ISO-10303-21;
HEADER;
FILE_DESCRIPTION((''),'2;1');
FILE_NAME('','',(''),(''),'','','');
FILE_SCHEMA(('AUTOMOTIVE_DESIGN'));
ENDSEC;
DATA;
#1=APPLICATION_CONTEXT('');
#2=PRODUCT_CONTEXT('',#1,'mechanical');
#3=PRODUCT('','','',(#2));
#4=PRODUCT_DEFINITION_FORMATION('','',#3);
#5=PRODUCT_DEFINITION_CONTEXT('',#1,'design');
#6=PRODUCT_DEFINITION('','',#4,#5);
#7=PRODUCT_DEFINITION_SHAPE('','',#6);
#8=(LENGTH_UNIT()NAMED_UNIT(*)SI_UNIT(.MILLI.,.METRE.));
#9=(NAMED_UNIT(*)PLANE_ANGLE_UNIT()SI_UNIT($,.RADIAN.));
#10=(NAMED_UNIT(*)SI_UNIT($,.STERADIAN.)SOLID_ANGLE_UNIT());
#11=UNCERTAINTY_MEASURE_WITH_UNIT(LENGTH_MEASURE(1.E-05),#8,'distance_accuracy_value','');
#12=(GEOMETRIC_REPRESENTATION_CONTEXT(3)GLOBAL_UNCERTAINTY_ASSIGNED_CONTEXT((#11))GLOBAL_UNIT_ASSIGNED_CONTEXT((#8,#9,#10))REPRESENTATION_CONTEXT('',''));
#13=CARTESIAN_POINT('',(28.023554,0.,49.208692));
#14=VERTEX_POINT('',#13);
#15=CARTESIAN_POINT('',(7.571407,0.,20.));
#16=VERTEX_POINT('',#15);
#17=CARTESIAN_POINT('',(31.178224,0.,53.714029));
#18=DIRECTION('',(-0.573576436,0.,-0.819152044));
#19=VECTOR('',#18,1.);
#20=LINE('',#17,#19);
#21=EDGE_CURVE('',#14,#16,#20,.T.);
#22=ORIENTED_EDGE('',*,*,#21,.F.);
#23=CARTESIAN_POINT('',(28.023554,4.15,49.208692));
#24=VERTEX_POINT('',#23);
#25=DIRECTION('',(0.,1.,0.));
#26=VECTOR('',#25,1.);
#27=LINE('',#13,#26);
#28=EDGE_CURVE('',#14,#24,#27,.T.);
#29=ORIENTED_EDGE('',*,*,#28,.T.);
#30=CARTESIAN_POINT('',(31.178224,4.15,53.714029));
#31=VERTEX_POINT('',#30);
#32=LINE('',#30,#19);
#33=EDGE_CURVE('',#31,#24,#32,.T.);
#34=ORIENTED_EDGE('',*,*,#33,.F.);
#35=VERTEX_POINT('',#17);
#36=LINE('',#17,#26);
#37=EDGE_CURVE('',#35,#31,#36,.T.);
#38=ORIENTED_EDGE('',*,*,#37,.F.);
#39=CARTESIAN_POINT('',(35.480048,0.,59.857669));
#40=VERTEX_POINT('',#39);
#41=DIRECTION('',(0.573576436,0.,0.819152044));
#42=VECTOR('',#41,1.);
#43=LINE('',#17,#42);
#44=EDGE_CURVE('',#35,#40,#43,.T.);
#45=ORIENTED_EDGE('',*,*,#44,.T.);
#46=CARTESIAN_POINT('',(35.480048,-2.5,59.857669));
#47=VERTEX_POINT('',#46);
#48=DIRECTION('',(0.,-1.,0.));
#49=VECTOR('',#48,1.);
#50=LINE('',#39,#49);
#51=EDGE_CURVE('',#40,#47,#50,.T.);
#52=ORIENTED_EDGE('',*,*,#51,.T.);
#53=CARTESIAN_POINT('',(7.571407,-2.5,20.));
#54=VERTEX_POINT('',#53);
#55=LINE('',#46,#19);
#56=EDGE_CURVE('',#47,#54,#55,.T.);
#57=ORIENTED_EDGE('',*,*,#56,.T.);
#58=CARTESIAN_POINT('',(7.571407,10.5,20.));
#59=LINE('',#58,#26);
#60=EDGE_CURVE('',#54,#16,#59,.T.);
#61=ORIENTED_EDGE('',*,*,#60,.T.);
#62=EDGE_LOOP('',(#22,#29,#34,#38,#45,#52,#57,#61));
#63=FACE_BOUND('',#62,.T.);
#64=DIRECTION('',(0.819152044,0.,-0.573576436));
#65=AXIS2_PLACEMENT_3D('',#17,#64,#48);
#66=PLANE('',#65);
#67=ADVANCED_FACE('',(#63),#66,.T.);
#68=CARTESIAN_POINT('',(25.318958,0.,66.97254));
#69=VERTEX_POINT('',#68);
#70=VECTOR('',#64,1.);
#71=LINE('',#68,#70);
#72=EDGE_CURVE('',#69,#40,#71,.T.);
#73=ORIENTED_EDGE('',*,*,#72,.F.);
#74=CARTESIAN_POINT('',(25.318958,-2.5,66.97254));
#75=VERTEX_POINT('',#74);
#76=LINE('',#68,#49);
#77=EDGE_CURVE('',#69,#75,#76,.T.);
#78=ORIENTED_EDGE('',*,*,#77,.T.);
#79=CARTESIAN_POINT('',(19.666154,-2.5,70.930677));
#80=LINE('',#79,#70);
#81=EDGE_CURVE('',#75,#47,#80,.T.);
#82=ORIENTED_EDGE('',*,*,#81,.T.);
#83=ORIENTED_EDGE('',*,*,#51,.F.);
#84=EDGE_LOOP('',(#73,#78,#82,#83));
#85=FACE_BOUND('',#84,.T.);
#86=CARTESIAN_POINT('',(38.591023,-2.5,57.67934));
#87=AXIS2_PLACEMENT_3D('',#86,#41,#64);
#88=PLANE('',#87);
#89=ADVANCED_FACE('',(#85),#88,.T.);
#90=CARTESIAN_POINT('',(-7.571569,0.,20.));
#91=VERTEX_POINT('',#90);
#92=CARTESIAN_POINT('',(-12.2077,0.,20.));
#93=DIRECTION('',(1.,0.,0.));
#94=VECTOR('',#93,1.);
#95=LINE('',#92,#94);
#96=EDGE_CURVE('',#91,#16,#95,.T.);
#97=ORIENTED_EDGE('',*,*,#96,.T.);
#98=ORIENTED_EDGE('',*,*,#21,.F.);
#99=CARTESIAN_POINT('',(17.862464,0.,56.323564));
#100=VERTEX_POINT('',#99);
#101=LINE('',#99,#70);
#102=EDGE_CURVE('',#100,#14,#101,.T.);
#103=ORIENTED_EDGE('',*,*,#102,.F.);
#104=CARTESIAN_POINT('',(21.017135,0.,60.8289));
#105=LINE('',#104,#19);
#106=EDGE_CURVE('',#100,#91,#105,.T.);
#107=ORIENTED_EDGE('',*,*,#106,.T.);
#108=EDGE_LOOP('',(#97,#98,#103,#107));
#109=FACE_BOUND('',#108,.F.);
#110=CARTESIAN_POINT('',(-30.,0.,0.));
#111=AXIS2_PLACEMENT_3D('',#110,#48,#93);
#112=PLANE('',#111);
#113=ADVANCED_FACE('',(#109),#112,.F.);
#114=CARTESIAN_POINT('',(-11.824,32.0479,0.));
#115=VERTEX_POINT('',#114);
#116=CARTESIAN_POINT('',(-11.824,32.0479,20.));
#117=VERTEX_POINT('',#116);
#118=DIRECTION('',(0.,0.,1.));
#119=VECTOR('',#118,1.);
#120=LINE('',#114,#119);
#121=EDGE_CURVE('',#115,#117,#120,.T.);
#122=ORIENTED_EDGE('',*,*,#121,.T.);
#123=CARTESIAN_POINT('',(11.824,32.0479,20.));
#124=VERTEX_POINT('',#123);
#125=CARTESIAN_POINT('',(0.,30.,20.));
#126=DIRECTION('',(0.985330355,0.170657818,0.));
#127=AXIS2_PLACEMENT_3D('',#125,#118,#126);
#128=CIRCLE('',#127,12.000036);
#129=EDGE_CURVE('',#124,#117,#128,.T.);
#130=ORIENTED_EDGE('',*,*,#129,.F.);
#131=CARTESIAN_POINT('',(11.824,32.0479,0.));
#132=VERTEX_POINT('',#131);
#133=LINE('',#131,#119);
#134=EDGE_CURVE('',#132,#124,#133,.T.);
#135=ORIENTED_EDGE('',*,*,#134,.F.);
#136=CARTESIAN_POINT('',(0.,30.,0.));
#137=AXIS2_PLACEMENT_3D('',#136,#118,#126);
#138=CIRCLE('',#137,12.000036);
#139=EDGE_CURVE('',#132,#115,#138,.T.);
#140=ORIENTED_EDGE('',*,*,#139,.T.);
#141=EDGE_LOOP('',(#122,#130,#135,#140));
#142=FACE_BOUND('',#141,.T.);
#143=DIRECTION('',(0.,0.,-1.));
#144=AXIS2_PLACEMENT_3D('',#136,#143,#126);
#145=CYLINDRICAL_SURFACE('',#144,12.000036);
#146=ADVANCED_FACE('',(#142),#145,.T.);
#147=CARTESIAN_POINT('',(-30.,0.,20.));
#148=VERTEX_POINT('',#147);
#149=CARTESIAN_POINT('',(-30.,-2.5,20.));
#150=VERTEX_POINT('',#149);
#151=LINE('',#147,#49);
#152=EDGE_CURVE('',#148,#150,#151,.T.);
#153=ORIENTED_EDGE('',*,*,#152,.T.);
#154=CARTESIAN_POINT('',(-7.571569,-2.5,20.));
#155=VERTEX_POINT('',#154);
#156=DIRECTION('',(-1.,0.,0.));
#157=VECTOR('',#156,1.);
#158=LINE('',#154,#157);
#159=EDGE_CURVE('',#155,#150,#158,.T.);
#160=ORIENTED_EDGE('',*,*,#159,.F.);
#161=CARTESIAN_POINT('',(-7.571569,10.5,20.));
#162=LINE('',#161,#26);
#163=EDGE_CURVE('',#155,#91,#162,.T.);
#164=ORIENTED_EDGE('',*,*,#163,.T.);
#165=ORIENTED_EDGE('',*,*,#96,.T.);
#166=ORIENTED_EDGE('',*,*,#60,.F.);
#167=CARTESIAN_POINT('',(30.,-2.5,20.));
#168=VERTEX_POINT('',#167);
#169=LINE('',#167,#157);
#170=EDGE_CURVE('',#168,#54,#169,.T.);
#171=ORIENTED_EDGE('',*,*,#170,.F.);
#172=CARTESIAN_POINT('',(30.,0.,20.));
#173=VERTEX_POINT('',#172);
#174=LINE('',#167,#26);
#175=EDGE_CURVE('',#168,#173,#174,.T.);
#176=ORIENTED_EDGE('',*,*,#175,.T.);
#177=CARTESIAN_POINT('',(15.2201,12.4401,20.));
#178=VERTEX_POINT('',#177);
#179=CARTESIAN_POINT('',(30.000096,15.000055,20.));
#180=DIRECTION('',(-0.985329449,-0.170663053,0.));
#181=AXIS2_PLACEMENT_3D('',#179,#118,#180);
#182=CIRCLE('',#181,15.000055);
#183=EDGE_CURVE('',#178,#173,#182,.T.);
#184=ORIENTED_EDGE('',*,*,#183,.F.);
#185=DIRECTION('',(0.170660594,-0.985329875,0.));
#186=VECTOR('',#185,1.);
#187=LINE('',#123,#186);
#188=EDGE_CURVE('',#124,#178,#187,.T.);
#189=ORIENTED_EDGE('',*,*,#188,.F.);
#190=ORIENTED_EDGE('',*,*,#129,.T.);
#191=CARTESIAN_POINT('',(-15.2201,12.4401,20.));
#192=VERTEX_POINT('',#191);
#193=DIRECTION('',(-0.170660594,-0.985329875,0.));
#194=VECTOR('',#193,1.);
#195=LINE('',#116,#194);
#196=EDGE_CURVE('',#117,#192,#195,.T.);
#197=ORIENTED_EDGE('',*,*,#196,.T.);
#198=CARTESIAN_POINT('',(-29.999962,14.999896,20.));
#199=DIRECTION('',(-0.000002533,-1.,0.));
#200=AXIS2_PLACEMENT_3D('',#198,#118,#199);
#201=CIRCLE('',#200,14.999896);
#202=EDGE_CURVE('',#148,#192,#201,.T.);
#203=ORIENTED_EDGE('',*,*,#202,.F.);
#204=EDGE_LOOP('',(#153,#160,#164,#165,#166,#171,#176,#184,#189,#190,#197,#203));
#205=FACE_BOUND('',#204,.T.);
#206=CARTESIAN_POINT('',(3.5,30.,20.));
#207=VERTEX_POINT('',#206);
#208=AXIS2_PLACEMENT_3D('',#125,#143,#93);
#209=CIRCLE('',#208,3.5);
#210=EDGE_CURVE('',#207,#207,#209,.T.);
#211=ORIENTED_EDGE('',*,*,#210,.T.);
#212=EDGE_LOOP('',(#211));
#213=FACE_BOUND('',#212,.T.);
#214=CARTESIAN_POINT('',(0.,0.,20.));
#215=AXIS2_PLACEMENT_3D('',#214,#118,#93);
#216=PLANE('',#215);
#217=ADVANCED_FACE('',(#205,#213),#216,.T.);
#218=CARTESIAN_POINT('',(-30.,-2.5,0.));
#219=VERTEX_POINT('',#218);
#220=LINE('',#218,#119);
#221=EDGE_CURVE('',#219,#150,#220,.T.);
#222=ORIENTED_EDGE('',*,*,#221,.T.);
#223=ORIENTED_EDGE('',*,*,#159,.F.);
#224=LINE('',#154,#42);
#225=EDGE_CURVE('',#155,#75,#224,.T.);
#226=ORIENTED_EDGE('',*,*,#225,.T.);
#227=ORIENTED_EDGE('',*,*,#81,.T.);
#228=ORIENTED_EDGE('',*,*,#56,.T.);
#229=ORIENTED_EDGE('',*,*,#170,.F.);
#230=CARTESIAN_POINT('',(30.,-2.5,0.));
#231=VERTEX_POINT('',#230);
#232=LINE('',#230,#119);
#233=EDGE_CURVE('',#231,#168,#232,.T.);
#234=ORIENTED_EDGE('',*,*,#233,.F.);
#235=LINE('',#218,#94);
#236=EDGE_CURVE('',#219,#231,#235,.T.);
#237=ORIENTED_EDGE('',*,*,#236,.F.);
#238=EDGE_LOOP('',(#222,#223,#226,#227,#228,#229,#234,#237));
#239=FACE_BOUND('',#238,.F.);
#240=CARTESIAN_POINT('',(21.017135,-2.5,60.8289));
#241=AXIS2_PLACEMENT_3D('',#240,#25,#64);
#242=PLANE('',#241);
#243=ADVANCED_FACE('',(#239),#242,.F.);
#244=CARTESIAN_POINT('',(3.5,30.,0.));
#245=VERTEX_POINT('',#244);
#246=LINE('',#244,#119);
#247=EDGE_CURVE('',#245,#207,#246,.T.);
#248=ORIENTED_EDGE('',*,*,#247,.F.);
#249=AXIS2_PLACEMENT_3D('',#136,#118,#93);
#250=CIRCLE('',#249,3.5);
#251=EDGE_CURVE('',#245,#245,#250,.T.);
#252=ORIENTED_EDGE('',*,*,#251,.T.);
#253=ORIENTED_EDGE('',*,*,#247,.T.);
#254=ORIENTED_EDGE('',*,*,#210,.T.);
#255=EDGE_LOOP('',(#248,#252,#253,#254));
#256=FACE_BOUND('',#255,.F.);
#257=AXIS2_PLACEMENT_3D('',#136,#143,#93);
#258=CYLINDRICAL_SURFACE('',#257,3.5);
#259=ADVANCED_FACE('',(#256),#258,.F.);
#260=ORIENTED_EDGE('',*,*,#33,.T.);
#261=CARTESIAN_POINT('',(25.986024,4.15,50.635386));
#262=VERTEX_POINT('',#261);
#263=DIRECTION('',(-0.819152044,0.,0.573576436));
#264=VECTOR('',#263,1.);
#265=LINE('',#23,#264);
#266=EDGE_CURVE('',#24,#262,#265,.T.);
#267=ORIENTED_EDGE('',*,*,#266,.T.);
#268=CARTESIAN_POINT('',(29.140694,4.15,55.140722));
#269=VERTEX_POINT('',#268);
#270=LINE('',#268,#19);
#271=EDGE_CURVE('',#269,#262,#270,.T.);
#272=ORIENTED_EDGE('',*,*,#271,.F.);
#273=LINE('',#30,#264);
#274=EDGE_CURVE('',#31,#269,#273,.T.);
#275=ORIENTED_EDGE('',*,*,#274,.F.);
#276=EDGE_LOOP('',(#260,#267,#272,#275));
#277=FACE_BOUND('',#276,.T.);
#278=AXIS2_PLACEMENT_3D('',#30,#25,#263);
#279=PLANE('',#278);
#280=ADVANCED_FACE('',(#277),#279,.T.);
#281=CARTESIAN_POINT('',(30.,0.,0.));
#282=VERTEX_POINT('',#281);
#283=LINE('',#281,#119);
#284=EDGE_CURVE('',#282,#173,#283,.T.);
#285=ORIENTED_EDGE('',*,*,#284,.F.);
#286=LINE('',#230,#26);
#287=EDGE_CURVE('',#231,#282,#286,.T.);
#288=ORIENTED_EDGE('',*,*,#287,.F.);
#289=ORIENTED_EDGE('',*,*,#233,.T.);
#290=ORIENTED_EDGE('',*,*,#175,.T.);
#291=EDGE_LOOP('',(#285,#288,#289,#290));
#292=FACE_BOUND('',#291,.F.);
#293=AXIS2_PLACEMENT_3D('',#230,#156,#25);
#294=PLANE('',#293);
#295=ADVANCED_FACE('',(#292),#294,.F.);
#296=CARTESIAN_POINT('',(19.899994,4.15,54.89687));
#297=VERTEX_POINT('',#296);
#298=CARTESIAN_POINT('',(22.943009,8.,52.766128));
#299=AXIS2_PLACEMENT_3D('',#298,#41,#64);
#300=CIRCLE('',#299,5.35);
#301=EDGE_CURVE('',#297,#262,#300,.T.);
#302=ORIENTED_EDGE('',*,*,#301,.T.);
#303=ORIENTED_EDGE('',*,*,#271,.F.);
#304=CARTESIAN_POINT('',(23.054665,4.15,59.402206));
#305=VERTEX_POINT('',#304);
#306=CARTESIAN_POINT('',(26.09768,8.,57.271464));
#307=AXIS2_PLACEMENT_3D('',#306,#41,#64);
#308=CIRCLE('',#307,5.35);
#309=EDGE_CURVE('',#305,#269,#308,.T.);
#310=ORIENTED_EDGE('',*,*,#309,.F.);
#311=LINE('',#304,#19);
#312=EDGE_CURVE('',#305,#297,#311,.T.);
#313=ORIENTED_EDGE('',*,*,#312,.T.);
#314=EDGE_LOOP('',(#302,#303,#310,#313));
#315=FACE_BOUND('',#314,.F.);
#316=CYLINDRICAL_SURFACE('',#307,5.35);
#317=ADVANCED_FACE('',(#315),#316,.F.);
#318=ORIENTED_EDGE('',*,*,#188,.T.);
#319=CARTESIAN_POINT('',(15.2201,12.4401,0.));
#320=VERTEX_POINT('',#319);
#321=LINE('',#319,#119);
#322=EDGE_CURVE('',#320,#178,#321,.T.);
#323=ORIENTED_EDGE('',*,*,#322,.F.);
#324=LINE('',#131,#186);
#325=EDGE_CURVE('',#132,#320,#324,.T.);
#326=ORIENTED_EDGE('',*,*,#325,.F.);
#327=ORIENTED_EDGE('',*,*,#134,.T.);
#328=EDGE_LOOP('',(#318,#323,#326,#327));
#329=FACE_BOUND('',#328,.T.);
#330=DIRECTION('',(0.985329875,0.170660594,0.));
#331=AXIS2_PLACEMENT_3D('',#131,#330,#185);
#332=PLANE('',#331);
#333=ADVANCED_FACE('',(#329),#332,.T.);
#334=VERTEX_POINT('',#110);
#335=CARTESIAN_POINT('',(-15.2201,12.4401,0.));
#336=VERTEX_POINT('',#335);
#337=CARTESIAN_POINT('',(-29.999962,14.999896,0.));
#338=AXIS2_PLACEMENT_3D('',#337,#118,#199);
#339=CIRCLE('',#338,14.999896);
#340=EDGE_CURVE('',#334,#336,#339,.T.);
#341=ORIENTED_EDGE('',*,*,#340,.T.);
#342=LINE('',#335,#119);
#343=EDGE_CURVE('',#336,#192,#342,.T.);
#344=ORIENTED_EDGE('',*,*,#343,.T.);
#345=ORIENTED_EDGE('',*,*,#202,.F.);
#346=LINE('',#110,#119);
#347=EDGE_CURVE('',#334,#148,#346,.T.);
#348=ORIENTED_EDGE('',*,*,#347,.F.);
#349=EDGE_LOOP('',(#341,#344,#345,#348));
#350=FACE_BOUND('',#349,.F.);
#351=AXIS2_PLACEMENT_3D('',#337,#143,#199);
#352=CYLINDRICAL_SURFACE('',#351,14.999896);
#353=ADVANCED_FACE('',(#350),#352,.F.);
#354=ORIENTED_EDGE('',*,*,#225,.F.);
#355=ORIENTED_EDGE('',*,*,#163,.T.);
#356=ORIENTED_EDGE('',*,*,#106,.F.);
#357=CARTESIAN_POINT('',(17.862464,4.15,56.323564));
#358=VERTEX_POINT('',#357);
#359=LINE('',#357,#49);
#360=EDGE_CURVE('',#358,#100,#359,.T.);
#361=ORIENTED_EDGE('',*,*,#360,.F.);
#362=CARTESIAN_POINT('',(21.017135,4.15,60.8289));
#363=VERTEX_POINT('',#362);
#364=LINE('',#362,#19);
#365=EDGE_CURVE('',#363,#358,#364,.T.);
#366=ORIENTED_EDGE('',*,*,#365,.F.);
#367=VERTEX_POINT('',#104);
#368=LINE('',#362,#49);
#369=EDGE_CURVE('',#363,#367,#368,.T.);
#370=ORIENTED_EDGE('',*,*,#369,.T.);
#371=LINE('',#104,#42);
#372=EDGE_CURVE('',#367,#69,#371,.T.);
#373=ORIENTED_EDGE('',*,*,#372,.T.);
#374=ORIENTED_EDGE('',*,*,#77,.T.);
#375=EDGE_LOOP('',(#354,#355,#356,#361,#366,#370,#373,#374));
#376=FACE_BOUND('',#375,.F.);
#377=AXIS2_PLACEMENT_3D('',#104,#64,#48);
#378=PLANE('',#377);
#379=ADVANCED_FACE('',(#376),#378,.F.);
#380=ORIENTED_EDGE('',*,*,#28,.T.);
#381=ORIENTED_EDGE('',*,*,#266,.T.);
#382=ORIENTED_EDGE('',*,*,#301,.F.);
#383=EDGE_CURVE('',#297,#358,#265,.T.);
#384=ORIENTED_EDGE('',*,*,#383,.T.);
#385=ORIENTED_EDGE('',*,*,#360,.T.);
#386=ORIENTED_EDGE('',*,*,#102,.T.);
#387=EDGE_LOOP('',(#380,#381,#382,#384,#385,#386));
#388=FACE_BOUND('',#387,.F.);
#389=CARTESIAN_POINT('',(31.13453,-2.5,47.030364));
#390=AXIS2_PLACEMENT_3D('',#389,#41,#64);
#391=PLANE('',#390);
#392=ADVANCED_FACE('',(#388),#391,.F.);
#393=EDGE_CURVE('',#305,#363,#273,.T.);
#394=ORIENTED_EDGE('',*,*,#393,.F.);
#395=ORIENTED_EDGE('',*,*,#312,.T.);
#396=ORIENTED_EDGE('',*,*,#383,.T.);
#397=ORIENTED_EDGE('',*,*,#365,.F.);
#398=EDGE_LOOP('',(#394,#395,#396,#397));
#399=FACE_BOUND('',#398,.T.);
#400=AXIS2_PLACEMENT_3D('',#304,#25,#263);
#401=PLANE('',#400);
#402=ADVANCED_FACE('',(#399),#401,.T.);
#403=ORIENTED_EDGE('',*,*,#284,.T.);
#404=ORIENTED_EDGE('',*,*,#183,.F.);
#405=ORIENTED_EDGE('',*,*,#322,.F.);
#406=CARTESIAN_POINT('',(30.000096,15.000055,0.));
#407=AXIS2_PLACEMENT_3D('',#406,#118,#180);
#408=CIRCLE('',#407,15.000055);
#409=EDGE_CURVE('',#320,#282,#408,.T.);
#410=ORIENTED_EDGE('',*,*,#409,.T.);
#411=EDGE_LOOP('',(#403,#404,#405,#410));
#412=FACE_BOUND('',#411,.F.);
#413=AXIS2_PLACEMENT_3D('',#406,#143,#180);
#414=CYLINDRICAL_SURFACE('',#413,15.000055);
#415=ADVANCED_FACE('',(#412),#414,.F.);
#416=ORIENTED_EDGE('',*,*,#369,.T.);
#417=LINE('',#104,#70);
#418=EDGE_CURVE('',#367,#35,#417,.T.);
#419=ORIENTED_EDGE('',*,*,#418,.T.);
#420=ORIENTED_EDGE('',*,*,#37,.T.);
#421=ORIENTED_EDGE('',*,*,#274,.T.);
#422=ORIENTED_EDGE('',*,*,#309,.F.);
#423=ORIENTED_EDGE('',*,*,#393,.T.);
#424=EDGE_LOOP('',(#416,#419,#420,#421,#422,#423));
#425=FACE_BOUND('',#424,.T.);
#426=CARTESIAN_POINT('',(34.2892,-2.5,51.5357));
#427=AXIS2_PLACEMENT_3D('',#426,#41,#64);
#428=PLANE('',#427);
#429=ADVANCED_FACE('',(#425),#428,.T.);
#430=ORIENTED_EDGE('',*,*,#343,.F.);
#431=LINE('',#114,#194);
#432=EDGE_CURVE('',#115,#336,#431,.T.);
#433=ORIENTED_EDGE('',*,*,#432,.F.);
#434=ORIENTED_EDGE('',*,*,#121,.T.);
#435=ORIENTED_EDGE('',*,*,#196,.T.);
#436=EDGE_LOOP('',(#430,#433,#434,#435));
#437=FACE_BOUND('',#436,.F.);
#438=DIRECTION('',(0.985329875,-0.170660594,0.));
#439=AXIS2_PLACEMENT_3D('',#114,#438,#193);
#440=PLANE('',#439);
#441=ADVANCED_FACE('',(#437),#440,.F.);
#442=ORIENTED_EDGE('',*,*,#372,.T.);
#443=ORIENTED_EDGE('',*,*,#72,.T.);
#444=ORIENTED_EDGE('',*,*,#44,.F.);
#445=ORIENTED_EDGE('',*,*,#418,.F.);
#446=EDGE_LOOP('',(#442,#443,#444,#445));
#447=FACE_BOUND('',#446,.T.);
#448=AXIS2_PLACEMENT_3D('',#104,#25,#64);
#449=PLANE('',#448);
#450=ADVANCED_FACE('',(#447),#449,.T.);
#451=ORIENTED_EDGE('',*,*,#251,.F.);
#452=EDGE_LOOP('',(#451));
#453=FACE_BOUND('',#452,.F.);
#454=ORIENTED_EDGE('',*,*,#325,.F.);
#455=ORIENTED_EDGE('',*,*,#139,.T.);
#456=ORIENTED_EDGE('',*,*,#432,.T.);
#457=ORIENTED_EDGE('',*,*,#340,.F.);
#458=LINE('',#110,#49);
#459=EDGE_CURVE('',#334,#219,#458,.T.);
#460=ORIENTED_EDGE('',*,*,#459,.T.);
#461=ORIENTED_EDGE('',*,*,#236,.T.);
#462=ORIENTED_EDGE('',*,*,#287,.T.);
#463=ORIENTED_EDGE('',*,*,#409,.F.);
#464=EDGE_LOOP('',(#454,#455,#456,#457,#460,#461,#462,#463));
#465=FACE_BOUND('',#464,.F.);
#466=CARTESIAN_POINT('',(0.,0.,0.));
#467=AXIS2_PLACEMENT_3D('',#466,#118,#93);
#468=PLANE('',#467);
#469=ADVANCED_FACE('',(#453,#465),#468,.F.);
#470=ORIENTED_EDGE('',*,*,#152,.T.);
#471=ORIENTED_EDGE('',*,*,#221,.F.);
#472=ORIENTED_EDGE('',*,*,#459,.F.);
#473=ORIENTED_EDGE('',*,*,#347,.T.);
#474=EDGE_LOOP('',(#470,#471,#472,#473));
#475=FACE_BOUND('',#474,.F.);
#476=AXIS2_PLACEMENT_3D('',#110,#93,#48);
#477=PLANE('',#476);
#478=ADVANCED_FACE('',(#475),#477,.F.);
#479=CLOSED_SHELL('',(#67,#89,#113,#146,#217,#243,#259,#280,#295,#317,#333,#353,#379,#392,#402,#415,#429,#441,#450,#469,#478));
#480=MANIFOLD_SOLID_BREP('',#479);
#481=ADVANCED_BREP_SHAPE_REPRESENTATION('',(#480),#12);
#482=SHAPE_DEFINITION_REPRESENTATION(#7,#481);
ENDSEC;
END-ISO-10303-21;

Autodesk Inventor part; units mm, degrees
ref_plane "YZ Plane" through (0, 0, 0) normal (1, 0, 0) x (0, 1, 0)
ref_plane "XZ Plane" through (0, 0, 0) normal (0, 1, 0) x (-1, 0, 0)
ref_plane "XY Plane" through (0, 0, 0) normal (0, 0, 1) x (1, 0, 0)
sketch "Sketch1" plane through (0, 0, 0) normal (0, 0, 1) x (1, 0, 0)
  circle A0 centre (0, 30) radius 8.45 construction
  circle A1 centre (0, 30) radius 3.5
  arc A2 (-30, 0) -> (-15.2201, 12.4401) centre (-30, 15) ccw
  arc A3 (15.2201, 12.4401) -> (30, 0) centre (30, 15) ccw
  arc A4 (11.824, 32.0479) -> (-11.824, 32.0479) centre (0, 30) ccw
  line L0 (-11.824, 32.0479) -> (-15.2201, 12.4401)
  line L1 (11.824, 32.0479) -> (15.2201, 12.4401)
  line L2 (30, 0) -> (-30, 0)
  line L3 (-30, 0) -> (-30, -2.5)
  line L4 (-30, -2.5) -> (30, -2.5)
  line L5 (30, -2.5) -> (30, 0)
  point P0 (0, 0)
  point P1 (0, 0)
  point P2 (0, 0)
  dimension "d0" = 16.9
  dimension "d1" = 7
  dimension "d2" = 30
  dimension "d3" = 12
  dimension "d4" = 15
  dimension "d5" = 60
  dimension "d6" = 2.5
extrude "Extrusion1" add sketch "Sketch1" along normal blind 20 contours A1 | A2 L0 A4 L1 A3 L2
extrude "Extrusion3" add sketch "Sketch1" along normal blind 20 contours L2 L5 L4 L3
ref_plane "Work Plane1" through (-30, -2.5, 0) normal (0, -1, 0) x (1, 0, 0)
sketch "Sketch2" plane through (-30, -2.5, 0) normal (0, -1, 0) x (1, 0, 0)
  line L0 (21.55, 20) -> (38.45, 20) projected
  line L1 (30, 20) -> (30, 60) construction
  line L2 (60, 0) -> (60, 20) construction
  line L3 (30, 20) -> (52.9431, 52.7661) construction
  line L4 (47.9062, 63.0072) -> (64.2892, 51.5357)
  line L5 (64.2892, 51.5357) -> (61.1346, 47.0303)
  line L6 (61.1346, 47.0303) -> (44.7515, 58.5018) construction
  line L7 (44.7515, 58.5018) -> (47.9062, 63.0072)
  line L8 (44.7515, 58.5018) -> (17.7923, 20)
  line L9 (41.824, 20) -> (18.176, 20) projected
  line L10 (61.1346, 47.0303) -> (42.2077, 20)
  line L11 (0, 20) -> (60, 20) projected
  point P0 (30, 0)
  dimension "d14" = 35
  dimension "d16" = 5.5
  dimension "d17" = 20
  dimension "d26" = 40
extrude "Extrusion6" add sketch "Sketch2" against normal blind 2.5
sketch "Sketch4" plane through (34.2892, -2.5, 51.5357) normal (0.5735764, 0, 0.819152) x (0.819152, 0, -0.5735764)
  line L0 (-23.103, 0) -> (-34.5746, 0) projected
  circle A0 centre (-10, 10.5) radius 7.3 construction
  circle A1 centre (-10, 10.5) radius 5.35
  line L1 (-16.2022, 2.5) -> (-3.7978, 2.5)
  line L2 (-3.7978, 2.5) -> (-3.7978, 6.65)
  line L3 (-3.7978, 6.65) -> (-16.2022, 6.65)
  line L4 (-16.2022, 6.65) -> (-16.2022, 2.5)
  line L5 (-20, 2.5) -> (0, 2.5) projected
  line L6 (-16.2022, 2.5) -> (-16.2022, 0)
  line L7 (-3.7978, 2.5) -> (-3.7978, 0)
  line L8 (-23.103, 0) -> (26.0461, 0) projected
  line L9 (0, 0) -> (-20, 0) projected
  line L10 (0, 0) -> (0, 2.5) projected
  line L11 (-20, 2.5) -> (0, 2.5) projected
  line L12 (-20, 0) -> (-20, 2.5) projected
  point P0 (1.4715, 2.5)
  point P1 (-10, 2.5)
  point P2 (-6.2852, 6.65)
  point P3 (-13.7148, 6.65)
  point P4 (0, 0)
  point P5 (0, 2.5)
  point P6 (-20, 2.5)
  point P7 (-20, 0)
  point P8 (-16.2022, 2.5)
  dimension "d29" = 14.6
  dimension "d30" = 10.7
  dimension "d31" = 1.5
  dimension "d32" = 8
extrude "Extrusion7" add sketch "Sketch4" against normal blind 5.5 contours A1 L3 L2 L1 L4
extrude "Extrusion8" cut sketch "Sketch4" against normal up to surface contours L6 L8 L12 L5 | L5 L10 L8 L7 surface through (0, 21, 20) normal (0, 0, 1)
extrude "Extrusion9" add sketch "Sketch4" along normal blind 7.5 contours L1 L7 L8 L6
extrude "Extrusion10" cut sketch "Sketch1" along normal through all contours A1
properties part number "Support 2 - V1"
